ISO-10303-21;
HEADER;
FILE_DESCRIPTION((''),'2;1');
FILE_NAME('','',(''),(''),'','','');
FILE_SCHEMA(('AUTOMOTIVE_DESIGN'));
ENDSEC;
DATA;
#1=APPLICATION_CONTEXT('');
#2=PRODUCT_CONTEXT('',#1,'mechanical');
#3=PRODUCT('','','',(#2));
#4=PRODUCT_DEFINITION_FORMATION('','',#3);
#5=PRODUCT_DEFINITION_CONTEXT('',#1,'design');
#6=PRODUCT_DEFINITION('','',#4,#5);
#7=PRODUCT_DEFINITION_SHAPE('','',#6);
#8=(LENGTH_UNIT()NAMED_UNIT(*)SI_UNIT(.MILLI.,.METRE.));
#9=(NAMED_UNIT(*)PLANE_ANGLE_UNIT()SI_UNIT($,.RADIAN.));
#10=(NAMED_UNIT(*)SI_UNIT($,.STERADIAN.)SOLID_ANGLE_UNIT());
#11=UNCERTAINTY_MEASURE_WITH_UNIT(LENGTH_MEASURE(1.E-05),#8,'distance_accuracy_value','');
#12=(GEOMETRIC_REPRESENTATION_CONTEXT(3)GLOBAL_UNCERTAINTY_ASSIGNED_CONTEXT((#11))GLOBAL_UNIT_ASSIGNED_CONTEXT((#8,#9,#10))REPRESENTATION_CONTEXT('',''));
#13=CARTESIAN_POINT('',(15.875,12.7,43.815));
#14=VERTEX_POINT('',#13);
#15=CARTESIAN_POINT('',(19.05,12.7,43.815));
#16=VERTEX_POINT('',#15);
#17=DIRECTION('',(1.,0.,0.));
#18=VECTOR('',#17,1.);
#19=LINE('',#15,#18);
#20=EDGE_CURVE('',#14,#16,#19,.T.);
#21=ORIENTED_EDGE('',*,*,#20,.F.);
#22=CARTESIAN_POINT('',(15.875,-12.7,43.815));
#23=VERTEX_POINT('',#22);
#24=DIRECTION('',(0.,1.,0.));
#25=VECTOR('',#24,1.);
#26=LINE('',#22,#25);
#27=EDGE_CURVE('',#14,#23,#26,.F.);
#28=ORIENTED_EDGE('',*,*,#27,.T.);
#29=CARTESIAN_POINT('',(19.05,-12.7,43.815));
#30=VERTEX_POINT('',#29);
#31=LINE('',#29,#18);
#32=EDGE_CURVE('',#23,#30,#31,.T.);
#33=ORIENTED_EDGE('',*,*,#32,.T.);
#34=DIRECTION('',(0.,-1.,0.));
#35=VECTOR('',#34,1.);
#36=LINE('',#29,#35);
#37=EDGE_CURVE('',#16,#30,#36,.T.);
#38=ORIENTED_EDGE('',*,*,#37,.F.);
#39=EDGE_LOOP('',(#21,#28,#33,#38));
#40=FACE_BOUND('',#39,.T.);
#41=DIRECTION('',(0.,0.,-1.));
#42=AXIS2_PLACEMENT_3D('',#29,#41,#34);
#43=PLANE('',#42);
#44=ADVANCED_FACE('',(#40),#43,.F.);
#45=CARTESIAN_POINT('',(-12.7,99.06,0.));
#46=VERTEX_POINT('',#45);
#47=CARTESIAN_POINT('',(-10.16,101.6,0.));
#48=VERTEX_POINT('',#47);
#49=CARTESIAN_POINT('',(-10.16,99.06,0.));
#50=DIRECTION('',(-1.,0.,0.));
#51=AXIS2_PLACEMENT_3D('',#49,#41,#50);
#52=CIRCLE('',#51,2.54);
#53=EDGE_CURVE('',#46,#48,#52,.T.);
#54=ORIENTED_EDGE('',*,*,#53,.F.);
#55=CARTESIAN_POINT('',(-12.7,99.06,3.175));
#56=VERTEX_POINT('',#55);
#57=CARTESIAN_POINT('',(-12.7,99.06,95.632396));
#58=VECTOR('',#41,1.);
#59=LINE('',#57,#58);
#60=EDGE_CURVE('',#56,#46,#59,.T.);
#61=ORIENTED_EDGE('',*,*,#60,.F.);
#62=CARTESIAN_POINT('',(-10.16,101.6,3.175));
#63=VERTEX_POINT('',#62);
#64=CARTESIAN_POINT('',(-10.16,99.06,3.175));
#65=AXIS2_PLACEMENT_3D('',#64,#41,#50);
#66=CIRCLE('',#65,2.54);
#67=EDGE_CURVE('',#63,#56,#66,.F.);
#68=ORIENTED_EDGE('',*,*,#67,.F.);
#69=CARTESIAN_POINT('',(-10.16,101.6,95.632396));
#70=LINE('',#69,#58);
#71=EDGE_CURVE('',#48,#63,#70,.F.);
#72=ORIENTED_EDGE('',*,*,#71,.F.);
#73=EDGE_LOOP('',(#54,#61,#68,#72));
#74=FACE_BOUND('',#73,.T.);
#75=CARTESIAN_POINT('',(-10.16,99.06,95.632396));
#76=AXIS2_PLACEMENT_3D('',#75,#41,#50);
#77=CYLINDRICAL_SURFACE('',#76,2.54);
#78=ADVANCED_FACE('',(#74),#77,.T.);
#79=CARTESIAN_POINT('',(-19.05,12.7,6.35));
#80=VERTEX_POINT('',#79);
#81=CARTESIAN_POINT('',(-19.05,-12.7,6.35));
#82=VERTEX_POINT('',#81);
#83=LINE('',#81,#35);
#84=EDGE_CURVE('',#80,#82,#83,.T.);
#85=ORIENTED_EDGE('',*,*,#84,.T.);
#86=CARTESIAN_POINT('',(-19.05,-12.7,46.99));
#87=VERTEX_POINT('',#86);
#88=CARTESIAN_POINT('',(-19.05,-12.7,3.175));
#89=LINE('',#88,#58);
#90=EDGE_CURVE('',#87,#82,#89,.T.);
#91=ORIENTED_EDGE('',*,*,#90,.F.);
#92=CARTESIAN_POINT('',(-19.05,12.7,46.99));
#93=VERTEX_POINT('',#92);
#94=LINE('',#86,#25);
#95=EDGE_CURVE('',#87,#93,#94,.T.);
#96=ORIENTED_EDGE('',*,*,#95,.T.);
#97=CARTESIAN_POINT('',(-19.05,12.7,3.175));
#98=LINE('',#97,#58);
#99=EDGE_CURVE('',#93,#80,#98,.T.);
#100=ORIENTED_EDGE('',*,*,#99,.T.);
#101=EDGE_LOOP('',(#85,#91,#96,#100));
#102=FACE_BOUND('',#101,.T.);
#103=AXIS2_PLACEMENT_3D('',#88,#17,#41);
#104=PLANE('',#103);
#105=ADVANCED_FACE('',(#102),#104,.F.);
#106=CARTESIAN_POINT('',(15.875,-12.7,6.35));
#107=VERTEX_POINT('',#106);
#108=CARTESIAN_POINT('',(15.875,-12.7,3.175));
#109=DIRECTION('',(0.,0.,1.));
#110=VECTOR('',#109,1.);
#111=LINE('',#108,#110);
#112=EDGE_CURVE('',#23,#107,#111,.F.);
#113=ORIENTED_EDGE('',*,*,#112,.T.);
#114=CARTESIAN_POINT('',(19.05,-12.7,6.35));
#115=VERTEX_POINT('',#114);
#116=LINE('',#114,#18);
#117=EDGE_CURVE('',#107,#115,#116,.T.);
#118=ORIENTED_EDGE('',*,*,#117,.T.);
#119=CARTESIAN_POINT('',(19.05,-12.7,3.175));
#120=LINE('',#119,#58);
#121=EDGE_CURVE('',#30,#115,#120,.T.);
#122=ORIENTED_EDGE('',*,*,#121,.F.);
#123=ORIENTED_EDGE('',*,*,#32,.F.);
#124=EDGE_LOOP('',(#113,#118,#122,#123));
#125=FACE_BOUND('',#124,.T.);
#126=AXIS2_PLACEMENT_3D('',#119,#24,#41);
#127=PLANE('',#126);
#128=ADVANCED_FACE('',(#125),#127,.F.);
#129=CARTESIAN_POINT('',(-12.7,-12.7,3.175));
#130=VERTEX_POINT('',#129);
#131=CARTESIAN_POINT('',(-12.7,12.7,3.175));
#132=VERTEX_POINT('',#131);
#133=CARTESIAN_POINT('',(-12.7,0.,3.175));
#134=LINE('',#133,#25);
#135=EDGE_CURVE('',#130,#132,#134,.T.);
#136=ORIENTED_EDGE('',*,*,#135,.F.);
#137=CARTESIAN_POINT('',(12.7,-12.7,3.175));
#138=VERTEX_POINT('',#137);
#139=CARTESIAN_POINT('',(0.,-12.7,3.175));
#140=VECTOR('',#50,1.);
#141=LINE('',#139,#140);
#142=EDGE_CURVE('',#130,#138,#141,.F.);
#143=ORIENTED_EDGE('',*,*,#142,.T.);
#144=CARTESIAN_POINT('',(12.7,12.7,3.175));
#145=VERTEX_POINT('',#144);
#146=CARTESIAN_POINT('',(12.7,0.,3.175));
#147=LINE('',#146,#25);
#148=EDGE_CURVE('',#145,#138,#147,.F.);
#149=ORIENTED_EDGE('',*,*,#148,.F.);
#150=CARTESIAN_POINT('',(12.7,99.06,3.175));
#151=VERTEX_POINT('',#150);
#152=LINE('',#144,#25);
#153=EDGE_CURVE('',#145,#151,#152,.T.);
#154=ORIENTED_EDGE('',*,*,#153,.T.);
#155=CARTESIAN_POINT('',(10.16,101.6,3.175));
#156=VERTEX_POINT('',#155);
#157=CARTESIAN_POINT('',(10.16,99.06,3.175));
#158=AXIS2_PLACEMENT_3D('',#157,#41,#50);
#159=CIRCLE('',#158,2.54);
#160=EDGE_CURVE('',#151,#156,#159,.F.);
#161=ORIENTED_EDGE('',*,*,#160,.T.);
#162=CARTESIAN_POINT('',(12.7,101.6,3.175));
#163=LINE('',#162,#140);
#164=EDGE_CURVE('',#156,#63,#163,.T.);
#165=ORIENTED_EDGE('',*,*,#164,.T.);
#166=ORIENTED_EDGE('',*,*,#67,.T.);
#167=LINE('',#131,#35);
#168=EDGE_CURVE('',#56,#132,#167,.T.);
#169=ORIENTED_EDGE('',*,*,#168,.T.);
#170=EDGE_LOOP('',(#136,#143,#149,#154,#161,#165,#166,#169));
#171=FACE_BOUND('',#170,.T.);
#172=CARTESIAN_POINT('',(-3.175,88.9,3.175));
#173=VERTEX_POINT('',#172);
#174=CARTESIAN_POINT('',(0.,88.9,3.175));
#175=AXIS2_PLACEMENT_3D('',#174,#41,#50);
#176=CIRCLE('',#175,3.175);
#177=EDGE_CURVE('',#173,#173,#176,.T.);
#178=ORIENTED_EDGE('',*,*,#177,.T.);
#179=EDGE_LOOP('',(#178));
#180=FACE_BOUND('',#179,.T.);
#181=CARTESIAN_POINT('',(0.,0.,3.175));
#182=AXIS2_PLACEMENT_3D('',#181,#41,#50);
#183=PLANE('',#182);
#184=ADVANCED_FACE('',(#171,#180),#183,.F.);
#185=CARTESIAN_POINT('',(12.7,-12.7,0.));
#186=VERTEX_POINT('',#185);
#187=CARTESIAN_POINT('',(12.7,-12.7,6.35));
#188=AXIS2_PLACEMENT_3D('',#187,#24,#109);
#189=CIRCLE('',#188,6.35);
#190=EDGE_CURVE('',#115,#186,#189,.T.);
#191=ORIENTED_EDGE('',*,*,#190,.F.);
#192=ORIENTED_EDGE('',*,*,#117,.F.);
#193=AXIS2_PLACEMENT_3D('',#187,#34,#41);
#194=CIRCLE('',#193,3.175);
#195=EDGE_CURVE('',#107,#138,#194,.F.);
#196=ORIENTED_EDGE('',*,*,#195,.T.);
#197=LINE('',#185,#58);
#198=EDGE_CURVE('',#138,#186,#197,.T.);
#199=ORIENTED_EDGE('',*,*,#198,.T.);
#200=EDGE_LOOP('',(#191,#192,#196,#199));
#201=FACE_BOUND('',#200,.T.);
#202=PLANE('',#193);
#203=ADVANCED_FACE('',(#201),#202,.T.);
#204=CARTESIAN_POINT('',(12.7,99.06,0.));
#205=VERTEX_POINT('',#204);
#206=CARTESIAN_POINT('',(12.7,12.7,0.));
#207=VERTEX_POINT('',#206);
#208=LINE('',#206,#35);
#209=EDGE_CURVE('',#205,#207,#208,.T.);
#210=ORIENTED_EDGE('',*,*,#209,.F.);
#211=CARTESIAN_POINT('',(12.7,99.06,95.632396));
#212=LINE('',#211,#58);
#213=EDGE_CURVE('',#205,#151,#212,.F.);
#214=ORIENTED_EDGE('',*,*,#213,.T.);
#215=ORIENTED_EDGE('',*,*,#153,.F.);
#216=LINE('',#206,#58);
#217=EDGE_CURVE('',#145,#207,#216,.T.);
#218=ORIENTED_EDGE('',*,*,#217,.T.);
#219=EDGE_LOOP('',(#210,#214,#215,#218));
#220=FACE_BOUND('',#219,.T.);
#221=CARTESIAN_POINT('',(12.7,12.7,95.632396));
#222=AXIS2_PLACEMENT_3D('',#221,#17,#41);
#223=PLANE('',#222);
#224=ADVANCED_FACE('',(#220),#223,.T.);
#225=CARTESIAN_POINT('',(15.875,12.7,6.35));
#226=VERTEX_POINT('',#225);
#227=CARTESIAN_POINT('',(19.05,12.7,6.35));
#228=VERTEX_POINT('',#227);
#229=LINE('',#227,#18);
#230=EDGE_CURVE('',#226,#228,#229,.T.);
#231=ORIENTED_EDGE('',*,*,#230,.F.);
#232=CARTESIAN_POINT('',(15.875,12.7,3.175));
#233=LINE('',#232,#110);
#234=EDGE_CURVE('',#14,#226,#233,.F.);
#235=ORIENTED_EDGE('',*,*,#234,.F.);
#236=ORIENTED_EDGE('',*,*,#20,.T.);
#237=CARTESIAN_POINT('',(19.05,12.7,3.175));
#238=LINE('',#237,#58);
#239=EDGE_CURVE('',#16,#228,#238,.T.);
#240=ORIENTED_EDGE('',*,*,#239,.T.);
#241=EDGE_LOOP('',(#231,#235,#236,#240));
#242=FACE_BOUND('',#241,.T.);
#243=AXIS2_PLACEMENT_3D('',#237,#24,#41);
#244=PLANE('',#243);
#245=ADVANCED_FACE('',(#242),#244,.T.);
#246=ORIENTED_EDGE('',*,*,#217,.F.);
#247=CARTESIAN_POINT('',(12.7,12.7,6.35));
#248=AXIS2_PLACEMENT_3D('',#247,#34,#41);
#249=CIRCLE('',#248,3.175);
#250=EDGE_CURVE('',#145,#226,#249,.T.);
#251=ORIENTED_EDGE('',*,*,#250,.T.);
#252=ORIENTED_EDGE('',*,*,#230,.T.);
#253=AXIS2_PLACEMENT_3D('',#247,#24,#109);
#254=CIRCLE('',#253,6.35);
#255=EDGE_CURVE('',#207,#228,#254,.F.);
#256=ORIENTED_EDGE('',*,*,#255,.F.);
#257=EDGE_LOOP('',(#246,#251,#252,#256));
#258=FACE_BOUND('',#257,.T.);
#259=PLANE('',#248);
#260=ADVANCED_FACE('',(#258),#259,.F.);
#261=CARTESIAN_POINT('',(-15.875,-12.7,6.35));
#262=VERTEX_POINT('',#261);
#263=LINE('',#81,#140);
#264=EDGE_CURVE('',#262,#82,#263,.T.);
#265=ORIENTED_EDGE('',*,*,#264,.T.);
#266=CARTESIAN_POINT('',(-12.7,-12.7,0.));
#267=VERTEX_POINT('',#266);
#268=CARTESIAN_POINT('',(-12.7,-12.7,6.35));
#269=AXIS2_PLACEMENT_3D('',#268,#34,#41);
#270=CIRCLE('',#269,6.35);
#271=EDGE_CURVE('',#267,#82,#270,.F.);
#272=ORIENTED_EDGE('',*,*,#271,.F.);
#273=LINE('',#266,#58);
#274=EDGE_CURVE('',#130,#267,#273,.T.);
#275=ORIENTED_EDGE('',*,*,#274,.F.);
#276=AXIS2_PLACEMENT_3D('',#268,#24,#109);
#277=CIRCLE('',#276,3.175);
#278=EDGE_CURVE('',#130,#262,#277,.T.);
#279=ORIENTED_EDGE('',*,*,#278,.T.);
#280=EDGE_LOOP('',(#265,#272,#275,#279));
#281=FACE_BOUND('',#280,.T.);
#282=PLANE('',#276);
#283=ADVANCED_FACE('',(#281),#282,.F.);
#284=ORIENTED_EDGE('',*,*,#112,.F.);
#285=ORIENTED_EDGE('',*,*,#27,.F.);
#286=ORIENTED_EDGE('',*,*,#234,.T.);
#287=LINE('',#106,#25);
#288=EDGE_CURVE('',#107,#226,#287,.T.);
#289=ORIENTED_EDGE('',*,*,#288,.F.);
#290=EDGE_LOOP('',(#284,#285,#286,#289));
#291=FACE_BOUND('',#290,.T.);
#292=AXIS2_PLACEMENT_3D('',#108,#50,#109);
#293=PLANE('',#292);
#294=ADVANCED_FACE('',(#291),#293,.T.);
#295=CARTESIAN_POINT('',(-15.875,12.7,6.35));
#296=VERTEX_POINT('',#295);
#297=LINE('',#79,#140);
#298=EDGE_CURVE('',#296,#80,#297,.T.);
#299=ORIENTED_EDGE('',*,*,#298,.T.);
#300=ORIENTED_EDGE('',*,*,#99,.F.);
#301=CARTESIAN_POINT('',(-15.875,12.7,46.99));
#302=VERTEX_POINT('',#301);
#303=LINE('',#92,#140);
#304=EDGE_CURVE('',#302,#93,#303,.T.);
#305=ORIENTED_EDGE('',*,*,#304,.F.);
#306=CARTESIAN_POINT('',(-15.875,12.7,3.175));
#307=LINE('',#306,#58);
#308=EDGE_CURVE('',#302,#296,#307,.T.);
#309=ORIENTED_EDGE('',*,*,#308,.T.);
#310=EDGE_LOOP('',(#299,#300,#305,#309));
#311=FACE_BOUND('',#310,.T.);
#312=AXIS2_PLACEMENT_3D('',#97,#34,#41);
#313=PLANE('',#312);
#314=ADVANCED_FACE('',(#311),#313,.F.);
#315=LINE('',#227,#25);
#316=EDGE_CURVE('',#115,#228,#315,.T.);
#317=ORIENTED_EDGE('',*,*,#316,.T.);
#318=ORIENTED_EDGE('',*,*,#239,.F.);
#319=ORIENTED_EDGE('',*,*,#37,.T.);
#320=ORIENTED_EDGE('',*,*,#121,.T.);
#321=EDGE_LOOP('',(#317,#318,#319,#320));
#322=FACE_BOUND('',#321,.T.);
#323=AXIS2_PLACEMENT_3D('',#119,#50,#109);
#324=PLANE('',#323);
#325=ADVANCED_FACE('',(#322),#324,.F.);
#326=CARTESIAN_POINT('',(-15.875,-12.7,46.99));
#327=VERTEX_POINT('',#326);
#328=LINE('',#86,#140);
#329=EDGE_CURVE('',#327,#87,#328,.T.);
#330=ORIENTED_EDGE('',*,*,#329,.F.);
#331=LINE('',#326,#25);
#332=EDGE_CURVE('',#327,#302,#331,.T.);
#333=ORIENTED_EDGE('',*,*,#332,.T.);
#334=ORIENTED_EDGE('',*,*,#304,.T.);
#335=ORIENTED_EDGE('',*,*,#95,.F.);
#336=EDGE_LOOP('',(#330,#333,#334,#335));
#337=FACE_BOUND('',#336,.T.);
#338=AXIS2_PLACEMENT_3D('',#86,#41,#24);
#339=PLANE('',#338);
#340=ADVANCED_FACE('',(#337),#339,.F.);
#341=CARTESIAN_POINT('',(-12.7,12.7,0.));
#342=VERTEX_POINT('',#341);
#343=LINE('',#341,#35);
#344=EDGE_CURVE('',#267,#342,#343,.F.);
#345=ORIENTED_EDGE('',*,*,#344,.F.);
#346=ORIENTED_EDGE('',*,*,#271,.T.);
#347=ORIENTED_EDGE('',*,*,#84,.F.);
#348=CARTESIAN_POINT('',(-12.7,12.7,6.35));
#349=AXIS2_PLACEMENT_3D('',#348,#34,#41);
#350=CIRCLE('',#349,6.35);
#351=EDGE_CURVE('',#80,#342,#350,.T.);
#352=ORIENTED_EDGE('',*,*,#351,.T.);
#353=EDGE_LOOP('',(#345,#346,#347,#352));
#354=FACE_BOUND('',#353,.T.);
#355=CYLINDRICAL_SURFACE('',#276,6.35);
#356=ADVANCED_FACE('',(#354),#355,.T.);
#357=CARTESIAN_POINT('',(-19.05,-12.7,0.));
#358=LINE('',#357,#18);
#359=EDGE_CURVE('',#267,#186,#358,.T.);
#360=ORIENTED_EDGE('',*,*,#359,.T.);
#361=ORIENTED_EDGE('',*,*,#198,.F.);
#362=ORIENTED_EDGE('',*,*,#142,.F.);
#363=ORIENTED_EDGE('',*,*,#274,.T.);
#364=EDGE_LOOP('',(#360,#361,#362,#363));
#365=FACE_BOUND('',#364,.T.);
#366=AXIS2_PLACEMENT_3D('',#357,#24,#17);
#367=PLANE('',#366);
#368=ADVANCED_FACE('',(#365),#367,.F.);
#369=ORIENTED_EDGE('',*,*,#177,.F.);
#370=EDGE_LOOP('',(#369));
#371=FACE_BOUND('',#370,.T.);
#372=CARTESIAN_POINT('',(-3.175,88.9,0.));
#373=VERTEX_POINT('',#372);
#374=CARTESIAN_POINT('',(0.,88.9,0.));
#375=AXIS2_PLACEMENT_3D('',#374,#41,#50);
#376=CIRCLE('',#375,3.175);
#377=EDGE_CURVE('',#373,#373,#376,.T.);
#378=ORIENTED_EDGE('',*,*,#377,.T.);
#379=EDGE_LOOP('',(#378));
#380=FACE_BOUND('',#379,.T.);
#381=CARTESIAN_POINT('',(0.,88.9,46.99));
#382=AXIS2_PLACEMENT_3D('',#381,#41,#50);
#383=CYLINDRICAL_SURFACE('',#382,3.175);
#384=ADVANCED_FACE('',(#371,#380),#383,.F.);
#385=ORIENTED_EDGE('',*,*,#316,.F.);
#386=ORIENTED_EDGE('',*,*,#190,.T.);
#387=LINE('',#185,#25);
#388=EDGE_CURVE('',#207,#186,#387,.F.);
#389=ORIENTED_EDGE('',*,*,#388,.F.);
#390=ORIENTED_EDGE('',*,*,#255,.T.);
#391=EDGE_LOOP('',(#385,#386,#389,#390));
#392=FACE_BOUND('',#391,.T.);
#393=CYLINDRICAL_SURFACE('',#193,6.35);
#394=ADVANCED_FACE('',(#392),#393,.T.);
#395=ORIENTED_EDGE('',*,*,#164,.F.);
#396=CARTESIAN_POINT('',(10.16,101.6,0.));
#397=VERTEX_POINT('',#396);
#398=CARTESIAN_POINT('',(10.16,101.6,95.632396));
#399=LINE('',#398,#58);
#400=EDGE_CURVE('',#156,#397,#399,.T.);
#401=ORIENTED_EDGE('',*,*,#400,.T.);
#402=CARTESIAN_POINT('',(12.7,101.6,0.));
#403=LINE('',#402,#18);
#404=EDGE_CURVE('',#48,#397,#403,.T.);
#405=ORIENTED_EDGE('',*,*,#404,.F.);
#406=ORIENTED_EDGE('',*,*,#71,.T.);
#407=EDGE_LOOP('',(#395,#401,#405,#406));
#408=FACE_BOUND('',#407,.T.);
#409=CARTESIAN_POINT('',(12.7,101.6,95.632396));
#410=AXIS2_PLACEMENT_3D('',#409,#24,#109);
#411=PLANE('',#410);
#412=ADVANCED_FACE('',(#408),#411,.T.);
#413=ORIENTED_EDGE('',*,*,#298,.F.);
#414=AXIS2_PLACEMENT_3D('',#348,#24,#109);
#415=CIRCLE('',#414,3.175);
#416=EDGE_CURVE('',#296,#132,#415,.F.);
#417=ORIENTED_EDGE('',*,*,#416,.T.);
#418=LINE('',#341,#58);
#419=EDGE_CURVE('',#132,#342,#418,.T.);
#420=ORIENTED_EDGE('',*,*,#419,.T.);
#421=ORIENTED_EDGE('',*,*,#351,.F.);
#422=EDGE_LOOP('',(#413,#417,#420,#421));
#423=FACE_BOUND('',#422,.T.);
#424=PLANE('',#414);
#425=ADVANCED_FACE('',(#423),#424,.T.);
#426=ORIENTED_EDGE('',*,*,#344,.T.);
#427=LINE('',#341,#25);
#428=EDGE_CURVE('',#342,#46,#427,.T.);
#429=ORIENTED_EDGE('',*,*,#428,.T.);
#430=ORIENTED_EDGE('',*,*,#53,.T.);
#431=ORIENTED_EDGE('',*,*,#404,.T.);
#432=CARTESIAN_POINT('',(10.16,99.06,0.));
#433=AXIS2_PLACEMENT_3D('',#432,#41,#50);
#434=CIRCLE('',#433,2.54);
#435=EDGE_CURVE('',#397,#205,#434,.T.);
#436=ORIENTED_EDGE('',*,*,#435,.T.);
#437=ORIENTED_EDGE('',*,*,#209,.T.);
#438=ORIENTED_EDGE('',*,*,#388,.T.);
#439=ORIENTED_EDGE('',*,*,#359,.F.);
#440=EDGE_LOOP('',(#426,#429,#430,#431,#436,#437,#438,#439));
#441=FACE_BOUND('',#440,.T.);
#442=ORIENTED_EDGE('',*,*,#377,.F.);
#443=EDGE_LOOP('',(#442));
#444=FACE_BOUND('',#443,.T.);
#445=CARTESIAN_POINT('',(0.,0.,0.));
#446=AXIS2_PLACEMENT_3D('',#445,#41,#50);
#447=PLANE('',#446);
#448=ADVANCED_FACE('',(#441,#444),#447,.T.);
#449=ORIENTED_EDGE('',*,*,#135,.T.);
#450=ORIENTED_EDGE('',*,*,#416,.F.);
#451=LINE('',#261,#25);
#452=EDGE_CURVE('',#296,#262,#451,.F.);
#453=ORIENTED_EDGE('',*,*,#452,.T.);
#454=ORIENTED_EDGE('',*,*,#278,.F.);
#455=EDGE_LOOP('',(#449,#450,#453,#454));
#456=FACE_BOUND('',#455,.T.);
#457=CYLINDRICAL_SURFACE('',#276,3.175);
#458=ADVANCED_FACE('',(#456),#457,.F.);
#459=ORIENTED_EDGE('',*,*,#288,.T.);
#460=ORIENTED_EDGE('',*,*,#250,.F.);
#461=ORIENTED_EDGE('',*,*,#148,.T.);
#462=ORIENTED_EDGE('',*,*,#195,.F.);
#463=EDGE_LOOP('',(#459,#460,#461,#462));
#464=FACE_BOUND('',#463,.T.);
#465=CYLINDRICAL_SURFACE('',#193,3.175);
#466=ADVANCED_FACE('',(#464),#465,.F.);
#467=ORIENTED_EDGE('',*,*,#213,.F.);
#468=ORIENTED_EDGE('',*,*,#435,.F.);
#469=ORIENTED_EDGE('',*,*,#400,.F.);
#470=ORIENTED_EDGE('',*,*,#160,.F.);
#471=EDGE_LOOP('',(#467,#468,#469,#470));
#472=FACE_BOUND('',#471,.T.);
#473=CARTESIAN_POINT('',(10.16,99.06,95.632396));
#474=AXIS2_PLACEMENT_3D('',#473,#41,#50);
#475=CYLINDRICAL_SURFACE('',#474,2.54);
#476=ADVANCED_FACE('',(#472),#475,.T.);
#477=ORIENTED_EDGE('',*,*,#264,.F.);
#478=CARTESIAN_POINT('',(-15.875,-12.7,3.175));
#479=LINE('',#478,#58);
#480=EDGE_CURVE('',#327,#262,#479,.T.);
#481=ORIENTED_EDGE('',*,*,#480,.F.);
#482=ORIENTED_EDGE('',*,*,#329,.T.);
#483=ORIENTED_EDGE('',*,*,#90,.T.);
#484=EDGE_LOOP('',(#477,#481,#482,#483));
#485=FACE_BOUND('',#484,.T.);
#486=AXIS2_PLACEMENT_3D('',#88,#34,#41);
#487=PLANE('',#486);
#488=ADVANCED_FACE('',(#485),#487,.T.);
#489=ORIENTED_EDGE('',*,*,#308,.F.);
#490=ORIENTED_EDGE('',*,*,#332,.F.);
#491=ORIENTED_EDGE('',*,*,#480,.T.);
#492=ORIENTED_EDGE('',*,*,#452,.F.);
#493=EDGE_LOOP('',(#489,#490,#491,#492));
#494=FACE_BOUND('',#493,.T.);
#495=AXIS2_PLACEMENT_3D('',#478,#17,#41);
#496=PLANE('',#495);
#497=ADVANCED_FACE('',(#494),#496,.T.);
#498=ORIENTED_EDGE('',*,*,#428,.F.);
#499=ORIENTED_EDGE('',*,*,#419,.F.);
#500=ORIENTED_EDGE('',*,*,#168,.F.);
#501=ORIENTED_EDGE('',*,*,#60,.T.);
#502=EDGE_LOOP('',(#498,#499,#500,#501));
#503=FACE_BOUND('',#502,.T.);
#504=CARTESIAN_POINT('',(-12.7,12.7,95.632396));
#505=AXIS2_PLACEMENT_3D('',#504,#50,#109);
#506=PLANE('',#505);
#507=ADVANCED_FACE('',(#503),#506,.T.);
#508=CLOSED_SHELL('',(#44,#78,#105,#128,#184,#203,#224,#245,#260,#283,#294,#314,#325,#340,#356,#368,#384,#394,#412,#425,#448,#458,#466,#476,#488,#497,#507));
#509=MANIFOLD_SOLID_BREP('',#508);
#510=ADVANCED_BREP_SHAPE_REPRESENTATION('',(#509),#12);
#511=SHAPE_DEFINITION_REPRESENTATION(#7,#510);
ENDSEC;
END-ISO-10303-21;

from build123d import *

# Parameters (mm, degrees)
SKETCH2_W              = 38.1
SKETCH2_H              = 25.4
BOSS_EXTRUDE1_DEPTH    = 3.175
SKETCH20_W             = 46.99
SKETCH20_H             = 25.4
BOSS_EXTRUDE5_DEPTH    = 3.175
SKETCH25_W             = 43.815
SKETCH25_H             = 25.4
BOSS_EXTRUDE6_DEPTH    = 3.175
CONVERT_SOLID2_START   = -12.7
CONVERT_SOLID2_DEPTH   = 25.4
CONVERT_SOLID2_2_DEPTH = 25.4
SKETCH16_W             = 25.4
SKETCH16_H             = 88.9
BOSS_EXTRUDE3_DEPTH    = 3.175
SKETCH17_R             = 3.175
CUT_EXTRUDE1_DEPTH     = 114.549648172
FILLET1_R              = 2.54


# Read off the part's stored shape, not the designer's step: Convert-Solid2
with BuildPart() as part:
    # Sketch2 → Boss-Extrude1 (new body)
    with BuildSketch(Plane.XY):
        Rectangle(SKETCH2_W, SKETCH2_H)
    extrude(amount=BOSS_EXTRUDE1_DEPTH)

    # Sketch20 → Boss-Extrude5 (add)
    with BuildSketch(Plane.ZY.offset(19.05)):
        with Locations((23.495, 0)):
            Rectangle(SKETCH20_W, SKETCH20_H)
    extrude(amount=-BOSS_EXTRUDE5_DEPTH)

    # Sketch25 → Boss-Extrude6 (add)
    with BuildSketch(Plane(origin=(19.05, 0, 0), x_dir=(0, 0, -1), z_dir=(1, 0, 0))):
        with Locations((-21.9075, 0)):
            Rectangle(SKETCH25_W, SKETCH25_H)
    extrude(amount=-BOSS_EXTRUDE6_DEPTH)

    # Convert-Solid2 outline → Convert-Solid2 (cut)
    with BuildSketch(Plane(origin=(0, 0, 0), x_dir=(1, 0, 0), z_dir=(0, 1, 0)).offset(CONVERT_SOLID2_START)):
        with BuildLine():
            Line((19.05, 0), (12.7, 0))
            ThreePointArc((12.7, 0), (17.190128061, -1.859871939), (19.05, -6.35))
            Line((19.05, -6.35), (19.05, 0))
        make_face()
        with BuildLine():
            ThreePointArc((-19.05, -6.35), (-17.190128061, -1.859871939), (-12.7, 0))
            Line((-12.7, 0), (-19.05, 0))
            Line((-19.05, 0), (-19.05, -6.35))
        make_face()
    extrude(amount=CONVERT_SOLID2_DEPTH, mode=Mode.SUBTRACT)

    # Convert-Solid2 2 outline → Convert-Solid2 2 (add)
    with BuildSketch(Plane(origin=(0, 0, 0), x_dir=(1, 0, 0), z_dir=(0, 1, 0)).offset(CONVERT_SOLID2_START)):
        with BuildLine():
            Line((15.875, -3.175), (12.7, -3.175))
            ThreePointArc((12.7, -3.175), (14.94506403, -4.10493597), (15.875, -6.35))
            Line((15.875, -6.35), (15.875, -3.175))
        make_face()
        with BuildLine():
            ThreePointArc((-15.875, -6.35), (-14.94506403, -4.10493597), (-12.7, -3.175))
            Line((-12.7, -3.175), (-15.875, -3.175))
            Line((-15.875, -3.175), (-15.875, -6.35))
        make_face()
    extrude(amount=CONVERT_SOLID2_2_DEPTH)

    # Sketch16 → Boss-Extrude3 (add)
    with BuildSketch(Plane(origin=(0, 0, 0), x_dir=(-1, 0, 0), z_dir=(0, 0, -1))):
        with Locations((0, 57.15)):
            Rectangle(SKETCH16_W, SKETCH16_H)
    extrude(amount=-BOSS_EXTRUDE3_DEPTH)

    # Sketch17 → Cut-Extrude1 (cut, through all)
    with BuildSketch(Plane(origin=(0, 0, 0), x_dir=(-1, 0, 0), z_dir=(0, 0, -1))):
        with Locations((0, 88.9)):
            Circle(SKETCH17_R)
    extrude(amount=-CUT_EXTRUDE1_DEPTH, mode=Mode.SUBTRACT)

    # Fillet1
    fillet1_edges = [part.edges().sort_by_distance(p)[0] for p in [
        (12.7, 101.6, 1.5875),
        (-12.7, 101.6, 1.5875),
    ]]
    fillet(fillet1_edges, radius=FILLET1_R)


solid = part.part
